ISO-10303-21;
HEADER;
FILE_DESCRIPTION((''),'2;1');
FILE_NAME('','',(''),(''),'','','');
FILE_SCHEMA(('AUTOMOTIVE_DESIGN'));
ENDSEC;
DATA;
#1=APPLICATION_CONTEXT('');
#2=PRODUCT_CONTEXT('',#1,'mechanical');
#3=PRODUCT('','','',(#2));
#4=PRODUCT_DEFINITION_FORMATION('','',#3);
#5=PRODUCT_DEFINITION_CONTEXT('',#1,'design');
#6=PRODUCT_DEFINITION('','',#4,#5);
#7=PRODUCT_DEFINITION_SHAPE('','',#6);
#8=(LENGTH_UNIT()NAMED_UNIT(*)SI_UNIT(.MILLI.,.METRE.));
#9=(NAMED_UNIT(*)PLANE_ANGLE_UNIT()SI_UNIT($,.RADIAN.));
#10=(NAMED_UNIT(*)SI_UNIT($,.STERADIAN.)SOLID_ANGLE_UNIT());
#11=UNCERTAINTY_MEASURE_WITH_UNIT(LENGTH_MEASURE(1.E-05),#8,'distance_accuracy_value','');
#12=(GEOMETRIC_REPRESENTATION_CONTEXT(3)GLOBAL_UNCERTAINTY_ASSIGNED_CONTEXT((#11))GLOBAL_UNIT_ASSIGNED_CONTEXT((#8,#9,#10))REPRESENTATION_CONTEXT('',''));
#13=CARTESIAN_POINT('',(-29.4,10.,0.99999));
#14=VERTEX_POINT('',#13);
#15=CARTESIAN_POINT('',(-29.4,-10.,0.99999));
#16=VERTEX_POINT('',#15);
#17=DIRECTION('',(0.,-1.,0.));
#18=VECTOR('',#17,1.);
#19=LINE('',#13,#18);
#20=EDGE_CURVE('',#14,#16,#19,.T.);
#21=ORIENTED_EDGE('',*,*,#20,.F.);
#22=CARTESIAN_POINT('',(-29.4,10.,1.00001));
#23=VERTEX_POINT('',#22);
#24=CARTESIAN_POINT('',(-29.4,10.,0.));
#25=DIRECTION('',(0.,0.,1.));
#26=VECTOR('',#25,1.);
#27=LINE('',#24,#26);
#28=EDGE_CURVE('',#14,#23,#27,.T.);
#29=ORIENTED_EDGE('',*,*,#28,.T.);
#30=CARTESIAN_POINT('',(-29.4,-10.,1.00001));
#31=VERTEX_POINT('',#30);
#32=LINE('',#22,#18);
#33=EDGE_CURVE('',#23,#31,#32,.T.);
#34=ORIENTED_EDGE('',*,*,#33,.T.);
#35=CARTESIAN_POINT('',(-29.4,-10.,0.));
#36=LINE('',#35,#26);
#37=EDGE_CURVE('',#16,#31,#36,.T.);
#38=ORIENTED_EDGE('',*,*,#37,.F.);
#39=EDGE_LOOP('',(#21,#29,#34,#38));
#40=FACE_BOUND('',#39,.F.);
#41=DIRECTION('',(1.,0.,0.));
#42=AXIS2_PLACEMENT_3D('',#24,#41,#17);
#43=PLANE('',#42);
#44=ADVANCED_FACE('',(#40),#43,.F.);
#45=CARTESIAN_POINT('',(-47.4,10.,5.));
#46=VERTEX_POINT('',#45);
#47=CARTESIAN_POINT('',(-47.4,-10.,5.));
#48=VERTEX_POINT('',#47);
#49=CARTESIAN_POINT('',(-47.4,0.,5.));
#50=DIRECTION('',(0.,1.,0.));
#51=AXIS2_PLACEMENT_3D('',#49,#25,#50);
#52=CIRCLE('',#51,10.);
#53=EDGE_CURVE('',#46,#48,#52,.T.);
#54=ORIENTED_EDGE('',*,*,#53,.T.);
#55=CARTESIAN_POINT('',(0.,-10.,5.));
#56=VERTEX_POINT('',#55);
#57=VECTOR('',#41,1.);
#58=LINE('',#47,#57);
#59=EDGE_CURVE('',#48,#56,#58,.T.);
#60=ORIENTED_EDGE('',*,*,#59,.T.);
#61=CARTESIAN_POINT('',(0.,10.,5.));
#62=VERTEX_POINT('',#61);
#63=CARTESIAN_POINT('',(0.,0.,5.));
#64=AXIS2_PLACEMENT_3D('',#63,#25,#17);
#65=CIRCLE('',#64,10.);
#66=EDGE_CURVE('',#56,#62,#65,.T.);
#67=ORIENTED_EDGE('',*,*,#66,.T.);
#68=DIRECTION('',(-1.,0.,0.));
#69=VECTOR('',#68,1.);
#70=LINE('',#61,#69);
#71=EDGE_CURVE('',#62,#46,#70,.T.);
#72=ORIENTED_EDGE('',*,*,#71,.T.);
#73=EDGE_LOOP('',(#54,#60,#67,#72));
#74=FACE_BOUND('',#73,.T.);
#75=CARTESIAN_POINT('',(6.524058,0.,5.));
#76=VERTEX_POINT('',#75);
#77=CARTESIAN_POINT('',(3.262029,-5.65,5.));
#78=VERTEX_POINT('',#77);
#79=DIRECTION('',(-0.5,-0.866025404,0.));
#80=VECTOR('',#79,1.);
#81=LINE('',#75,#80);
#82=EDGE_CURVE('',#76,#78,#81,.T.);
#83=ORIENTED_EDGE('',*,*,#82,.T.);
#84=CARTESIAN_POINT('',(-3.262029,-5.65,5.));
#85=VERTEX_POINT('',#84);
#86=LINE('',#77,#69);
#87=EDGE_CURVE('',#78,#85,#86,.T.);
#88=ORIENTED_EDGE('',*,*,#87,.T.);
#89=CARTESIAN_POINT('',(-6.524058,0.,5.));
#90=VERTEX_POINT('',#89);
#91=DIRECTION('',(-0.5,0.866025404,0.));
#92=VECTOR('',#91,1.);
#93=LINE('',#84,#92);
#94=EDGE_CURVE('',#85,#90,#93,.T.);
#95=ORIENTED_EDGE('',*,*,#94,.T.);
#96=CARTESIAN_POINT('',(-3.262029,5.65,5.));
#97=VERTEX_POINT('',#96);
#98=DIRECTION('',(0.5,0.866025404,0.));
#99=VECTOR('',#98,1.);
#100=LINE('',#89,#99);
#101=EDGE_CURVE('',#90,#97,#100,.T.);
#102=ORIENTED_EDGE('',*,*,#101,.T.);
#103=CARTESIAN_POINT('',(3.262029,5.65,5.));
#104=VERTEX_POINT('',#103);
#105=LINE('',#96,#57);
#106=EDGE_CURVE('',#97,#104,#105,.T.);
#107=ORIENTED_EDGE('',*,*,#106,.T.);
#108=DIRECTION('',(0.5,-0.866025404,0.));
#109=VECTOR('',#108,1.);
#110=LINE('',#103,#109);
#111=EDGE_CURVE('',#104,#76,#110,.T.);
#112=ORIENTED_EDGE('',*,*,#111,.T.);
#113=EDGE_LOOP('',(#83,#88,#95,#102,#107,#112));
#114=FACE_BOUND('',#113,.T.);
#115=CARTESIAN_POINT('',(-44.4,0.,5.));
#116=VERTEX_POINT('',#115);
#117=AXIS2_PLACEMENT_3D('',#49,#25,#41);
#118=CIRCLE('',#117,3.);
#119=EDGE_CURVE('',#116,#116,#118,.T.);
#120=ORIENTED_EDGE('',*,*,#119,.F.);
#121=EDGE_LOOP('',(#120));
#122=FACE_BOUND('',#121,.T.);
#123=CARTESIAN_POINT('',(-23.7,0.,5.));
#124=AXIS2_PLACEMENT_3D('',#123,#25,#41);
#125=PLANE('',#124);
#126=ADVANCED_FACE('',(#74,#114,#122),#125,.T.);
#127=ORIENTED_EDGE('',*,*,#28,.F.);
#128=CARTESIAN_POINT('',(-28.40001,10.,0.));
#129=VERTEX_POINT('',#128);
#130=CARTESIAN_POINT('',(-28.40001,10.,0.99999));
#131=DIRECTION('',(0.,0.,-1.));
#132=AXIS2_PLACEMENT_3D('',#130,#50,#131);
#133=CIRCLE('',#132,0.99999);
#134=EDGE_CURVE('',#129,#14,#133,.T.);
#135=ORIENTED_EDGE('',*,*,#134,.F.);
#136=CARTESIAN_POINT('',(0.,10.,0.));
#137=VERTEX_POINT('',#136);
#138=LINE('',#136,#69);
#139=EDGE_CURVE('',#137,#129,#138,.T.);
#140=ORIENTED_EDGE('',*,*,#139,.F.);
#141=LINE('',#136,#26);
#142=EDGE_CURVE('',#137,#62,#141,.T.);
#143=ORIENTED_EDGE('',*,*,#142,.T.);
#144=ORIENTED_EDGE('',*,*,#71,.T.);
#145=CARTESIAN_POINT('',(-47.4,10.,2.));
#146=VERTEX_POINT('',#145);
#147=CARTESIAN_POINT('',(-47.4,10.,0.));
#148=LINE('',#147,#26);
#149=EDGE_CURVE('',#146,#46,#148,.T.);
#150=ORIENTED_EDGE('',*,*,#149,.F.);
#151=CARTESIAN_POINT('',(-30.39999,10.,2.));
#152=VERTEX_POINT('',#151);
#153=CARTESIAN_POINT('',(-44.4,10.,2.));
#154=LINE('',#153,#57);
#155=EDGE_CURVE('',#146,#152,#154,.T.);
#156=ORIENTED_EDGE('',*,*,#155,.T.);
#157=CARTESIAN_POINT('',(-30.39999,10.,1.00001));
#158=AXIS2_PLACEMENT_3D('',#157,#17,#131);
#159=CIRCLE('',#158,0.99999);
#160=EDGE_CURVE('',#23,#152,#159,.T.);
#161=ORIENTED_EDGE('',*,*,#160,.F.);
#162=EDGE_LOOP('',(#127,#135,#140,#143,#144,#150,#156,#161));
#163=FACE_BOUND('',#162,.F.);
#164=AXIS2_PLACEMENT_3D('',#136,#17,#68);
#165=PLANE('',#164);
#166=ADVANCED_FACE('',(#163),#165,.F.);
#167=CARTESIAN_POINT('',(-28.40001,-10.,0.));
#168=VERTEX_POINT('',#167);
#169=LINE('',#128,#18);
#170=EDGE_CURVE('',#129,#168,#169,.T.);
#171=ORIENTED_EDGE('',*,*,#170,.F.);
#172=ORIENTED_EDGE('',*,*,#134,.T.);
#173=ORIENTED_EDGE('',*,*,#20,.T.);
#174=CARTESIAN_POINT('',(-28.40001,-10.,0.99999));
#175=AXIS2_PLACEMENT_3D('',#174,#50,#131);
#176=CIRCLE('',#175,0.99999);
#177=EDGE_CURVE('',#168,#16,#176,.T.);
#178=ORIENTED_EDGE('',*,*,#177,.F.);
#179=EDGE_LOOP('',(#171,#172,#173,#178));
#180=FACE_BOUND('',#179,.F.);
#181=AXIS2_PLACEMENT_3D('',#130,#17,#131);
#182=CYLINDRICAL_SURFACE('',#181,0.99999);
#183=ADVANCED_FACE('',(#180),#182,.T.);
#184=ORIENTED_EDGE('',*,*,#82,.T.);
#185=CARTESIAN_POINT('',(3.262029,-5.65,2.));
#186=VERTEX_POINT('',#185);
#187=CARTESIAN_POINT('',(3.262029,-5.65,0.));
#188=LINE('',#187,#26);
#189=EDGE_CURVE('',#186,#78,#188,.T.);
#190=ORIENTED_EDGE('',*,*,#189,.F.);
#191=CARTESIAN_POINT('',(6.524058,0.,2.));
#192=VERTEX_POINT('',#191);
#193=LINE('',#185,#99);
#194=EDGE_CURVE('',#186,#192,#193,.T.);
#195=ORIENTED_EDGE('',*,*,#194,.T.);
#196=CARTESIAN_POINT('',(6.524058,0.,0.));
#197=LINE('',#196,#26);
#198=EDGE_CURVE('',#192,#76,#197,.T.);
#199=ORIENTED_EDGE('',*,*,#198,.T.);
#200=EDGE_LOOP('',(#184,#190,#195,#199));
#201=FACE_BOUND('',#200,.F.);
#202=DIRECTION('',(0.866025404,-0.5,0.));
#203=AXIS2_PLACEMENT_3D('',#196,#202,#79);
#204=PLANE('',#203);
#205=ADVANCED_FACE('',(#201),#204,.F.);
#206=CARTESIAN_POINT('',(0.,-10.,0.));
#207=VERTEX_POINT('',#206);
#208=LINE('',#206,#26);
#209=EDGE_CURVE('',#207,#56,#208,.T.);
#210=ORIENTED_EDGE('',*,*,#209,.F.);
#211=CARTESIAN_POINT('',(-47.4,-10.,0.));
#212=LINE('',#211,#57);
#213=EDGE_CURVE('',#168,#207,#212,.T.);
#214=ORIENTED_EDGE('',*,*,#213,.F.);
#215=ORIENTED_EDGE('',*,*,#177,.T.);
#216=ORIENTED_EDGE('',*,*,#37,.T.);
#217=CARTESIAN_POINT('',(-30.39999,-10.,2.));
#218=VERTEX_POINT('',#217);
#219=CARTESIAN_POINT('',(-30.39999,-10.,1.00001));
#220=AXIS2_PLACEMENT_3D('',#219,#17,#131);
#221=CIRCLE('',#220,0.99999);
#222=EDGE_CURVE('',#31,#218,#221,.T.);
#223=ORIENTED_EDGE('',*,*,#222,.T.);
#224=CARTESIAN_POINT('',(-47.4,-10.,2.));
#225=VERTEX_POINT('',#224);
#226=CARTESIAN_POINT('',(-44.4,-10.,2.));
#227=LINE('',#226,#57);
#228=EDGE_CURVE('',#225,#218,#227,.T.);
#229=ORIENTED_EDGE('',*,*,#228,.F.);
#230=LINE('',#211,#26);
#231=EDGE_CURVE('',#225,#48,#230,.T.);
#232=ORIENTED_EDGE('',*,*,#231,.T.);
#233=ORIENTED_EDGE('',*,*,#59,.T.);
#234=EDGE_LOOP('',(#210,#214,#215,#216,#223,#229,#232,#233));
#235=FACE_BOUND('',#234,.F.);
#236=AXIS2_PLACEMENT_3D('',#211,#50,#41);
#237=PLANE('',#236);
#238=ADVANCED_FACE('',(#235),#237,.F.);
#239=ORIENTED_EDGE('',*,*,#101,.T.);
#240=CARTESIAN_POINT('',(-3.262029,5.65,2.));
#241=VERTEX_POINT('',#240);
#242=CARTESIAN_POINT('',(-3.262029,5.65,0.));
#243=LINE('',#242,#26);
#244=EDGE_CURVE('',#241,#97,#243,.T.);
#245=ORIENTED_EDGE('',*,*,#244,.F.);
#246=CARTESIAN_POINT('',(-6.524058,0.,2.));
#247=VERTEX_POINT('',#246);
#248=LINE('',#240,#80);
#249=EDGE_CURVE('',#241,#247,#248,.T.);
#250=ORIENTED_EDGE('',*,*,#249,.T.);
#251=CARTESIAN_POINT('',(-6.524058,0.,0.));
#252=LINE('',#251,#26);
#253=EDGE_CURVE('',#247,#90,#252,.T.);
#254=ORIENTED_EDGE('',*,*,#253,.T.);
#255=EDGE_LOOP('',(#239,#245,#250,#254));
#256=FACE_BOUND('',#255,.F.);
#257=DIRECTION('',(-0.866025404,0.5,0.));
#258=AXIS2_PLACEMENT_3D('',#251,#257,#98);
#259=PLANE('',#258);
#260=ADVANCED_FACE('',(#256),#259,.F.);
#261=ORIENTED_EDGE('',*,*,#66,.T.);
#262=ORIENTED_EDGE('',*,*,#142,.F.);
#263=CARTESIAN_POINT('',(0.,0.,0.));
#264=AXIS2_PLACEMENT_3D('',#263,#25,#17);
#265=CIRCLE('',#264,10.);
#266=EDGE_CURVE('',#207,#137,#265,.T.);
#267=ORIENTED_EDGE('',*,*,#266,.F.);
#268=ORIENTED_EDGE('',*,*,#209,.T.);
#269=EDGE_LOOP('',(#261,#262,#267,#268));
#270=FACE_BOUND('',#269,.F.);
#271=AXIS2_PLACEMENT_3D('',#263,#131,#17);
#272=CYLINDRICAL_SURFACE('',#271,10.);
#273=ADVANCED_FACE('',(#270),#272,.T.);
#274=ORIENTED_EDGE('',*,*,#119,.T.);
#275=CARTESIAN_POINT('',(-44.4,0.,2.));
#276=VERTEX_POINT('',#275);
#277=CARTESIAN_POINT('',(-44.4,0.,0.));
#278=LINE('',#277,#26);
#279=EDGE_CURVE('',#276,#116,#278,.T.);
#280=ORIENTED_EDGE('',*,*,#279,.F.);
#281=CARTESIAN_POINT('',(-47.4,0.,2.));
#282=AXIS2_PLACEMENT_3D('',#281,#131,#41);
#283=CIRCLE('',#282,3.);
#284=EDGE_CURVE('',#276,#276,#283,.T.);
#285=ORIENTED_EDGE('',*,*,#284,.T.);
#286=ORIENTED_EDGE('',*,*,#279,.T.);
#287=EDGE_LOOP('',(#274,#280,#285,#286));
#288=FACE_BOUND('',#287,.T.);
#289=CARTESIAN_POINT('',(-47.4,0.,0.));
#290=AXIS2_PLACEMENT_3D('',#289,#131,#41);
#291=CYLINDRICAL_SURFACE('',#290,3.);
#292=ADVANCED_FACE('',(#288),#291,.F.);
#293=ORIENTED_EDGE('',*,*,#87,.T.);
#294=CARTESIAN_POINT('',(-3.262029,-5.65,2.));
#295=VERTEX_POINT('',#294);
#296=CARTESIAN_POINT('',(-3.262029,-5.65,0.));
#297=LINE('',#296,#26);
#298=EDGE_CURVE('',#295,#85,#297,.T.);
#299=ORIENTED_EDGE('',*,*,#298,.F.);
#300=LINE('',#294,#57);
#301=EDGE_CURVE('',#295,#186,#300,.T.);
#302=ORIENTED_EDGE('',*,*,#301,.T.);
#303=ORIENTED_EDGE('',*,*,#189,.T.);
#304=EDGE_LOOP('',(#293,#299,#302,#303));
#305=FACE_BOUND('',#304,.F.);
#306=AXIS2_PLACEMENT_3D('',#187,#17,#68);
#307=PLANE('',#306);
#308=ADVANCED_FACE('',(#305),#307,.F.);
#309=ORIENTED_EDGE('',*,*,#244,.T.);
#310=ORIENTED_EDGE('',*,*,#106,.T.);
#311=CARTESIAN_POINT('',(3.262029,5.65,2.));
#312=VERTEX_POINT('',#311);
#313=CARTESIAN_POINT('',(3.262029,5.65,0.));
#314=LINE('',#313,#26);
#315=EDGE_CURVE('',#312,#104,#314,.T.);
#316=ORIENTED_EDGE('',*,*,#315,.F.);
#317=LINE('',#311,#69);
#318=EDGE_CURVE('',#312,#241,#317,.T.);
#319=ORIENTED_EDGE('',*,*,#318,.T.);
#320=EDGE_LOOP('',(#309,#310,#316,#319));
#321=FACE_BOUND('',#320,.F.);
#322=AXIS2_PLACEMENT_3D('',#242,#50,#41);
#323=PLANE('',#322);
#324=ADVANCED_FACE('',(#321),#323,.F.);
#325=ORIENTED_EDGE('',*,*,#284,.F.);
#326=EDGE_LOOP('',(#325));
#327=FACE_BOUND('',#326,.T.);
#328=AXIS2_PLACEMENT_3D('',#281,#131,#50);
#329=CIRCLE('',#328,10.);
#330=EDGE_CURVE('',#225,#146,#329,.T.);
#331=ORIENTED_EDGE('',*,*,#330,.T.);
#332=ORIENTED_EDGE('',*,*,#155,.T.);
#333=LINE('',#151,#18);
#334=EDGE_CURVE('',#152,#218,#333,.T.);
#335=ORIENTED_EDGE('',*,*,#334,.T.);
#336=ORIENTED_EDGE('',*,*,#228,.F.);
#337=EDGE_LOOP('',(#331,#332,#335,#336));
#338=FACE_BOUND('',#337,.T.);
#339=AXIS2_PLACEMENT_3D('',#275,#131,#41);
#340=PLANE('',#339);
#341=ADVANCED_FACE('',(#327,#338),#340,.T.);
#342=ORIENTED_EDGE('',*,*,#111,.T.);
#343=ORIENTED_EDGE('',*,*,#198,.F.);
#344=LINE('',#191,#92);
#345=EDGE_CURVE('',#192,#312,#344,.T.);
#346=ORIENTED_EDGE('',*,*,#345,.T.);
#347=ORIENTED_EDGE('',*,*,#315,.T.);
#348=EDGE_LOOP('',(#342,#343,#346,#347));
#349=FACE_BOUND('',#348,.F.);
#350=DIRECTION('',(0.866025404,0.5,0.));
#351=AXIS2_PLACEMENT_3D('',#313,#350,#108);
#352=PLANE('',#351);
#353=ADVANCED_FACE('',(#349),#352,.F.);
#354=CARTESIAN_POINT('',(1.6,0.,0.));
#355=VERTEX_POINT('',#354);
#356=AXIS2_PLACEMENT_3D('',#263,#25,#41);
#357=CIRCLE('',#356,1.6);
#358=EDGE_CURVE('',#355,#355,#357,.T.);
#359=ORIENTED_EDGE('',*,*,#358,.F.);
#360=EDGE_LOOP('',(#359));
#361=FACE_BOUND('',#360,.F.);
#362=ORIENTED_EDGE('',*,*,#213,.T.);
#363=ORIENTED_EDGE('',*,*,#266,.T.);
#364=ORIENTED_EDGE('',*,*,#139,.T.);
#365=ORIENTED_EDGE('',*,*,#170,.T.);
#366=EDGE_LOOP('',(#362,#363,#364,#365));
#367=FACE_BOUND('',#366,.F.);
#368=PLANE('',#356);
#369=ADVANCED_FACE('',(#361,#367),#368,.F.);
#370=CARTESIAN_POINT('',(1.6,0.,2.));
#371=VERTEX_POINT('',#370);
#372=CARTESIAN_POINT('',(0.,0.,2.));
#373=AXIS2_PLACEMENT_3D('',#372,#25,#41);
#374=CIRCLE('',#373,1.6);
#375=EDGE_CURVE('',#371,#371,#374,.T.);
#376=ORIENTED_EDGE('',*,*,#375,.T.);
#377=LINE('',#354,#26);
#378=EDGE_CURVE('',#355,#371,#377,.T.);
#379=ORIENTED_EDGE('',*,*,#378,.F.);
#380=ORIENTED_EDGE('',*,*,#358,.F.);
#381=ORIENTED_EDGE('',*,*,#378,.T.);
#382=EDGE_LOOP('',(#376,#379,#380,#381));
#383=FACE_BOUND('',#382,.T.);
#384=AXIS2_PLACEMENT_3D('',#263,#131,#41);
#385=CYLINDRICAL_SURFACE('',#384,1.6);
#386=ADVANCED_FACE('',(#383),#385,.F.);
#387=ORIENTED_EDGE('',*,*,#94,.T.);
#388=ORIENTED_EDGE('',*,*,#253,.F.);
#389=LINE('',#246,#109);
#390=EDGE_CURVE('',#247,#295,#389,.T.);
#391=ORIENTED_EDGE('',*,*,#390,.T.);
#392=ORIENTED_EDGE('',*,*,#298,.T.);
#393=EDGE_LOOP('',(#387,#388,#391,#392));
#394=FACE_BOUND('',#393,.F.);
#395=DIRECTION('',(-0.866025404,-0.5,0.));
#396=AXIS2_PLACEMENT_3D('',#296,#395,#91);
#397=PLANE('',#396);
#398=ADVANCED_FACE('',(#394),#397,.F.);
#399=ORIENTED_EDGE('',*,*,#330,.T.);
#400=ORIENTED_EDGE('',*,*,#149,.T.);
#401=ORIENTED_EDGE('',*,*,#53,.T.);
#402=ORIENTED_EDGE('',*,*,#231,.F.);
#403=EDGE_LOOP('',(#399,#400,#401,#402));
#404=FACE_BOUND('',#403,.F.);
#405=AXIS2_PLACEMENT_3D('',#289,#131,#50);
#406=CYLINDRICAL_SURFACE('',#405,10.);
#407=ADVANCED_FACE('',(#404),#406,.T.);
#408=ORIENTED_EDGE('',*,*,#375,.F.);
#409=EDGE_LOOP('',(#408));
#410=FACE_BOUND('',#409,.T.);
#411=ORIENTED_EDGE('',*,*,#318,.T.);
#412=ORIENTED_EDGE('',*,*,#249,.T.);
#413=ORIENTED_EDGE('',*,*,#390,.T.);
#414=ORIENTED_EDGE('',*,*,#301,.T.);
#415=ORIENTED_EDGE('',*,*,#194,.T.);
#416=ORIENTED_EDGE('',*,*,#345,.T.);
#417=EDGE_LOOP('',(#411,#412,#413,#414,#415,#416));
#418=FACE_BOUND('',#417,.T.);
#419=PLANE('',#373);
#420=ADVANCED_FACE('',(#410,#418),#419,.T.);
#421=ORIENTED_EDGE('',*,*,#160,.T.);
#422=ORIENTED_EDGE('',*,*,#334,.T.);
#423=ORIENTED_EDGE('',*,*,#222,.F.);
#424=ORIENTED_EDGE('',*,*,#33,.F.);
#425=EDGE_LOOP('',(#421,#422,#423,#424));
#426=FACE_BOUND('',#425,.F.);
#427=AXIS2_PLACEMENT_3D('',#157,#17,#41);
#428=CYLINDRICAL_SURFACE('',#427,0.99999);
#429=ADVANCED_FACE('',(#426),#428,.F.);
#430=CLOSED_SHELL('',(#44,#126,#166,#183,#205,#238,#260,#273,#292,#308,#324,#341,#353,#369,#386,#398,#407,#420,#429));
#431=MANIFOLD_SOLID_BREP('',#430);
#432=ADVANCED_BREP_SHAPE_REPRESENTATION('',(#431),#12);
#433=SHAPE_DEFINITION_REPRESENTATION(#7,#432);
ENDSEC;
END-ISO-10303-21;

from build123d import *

# Parameters (mm, degrees)
F0_R     = 3
F1_DEPTH = 5
F0_R_2   = 1.6
F2_DEPTH = 2
F4_W     = 30
F4_H     = 20
F5_DEPTH = 2
F6_R     = 0.99999


# Not quite as in the source:
# - a fillet or chamfer is up to 0.001 mm smaller than in the source, because OpenCascade refuses the exact size


with BuildPart() as f1:
    # F0 (on Top) → F1 (new body)
    with BuildSketch(Plane.XY):
        with BuildLine():
            Line((-47.4, -10), (0, -10))
            ThreePointArc((0, -10), (10, 0), (0, 10))
            Line((0, 10), (-47.4, 10))
            ThreePointArc((-47.4, 10), (-57.4, 0), (-47.4, -10))
        make_face()
        with Locations((-47.4, 0)):
            Circle(F0_R, mode=Mode.SUBTRACT)
        Polygon((-6.5240580418, 0), (-3.2620290209, 5.65), (3.2620290209, 5.65), (6.5240580418, 0), (3.2620290209, -5.65), (-3.2620290209, -5.65), align=None, mode=Mode.SUBTRACT)
    extrude(amount=F1_DEPTH)

    # F0 (on Top) → F2 (join)
    with BuildSketch(Plane.XY):
        Polygon((3.2620290209, 5.65), (-3.2620290209, 5.65), (-6.5240580418, 0), (-3.2620290209, -5.65), (3.2620290209, -5.65), (6.5240580418, 0), align=None)
        Circle(F0_R_2, mode=Mode.SUBTRACT)
    extrude(amount=F2_DEPTH)

    # F4 (on face) → F5 (cut)
    with BuildSketch(Plane(origin=(0, 0, 0), x_dir=(1, 0, 0), z_dir=(0, 0, -1))):
        with Locations((-44.4, 0)):
            Rectangle(F4_W, F4_H)
    extrude(amount=-F5_DEPTH, mode=Mode.SUBTRACT)

    # F6 (radius 1 in the source; OpenCascade refuses exactly that, so slightly less here)
    f6_edges = [f1.edges().sort_by_distance(p)[0] for p in [
        (-29.4, 0, 2),
        (-29.4, 0, 0),
    ]]
    fillet(f6_edges, radius=F6_R)


solid = f1.part
